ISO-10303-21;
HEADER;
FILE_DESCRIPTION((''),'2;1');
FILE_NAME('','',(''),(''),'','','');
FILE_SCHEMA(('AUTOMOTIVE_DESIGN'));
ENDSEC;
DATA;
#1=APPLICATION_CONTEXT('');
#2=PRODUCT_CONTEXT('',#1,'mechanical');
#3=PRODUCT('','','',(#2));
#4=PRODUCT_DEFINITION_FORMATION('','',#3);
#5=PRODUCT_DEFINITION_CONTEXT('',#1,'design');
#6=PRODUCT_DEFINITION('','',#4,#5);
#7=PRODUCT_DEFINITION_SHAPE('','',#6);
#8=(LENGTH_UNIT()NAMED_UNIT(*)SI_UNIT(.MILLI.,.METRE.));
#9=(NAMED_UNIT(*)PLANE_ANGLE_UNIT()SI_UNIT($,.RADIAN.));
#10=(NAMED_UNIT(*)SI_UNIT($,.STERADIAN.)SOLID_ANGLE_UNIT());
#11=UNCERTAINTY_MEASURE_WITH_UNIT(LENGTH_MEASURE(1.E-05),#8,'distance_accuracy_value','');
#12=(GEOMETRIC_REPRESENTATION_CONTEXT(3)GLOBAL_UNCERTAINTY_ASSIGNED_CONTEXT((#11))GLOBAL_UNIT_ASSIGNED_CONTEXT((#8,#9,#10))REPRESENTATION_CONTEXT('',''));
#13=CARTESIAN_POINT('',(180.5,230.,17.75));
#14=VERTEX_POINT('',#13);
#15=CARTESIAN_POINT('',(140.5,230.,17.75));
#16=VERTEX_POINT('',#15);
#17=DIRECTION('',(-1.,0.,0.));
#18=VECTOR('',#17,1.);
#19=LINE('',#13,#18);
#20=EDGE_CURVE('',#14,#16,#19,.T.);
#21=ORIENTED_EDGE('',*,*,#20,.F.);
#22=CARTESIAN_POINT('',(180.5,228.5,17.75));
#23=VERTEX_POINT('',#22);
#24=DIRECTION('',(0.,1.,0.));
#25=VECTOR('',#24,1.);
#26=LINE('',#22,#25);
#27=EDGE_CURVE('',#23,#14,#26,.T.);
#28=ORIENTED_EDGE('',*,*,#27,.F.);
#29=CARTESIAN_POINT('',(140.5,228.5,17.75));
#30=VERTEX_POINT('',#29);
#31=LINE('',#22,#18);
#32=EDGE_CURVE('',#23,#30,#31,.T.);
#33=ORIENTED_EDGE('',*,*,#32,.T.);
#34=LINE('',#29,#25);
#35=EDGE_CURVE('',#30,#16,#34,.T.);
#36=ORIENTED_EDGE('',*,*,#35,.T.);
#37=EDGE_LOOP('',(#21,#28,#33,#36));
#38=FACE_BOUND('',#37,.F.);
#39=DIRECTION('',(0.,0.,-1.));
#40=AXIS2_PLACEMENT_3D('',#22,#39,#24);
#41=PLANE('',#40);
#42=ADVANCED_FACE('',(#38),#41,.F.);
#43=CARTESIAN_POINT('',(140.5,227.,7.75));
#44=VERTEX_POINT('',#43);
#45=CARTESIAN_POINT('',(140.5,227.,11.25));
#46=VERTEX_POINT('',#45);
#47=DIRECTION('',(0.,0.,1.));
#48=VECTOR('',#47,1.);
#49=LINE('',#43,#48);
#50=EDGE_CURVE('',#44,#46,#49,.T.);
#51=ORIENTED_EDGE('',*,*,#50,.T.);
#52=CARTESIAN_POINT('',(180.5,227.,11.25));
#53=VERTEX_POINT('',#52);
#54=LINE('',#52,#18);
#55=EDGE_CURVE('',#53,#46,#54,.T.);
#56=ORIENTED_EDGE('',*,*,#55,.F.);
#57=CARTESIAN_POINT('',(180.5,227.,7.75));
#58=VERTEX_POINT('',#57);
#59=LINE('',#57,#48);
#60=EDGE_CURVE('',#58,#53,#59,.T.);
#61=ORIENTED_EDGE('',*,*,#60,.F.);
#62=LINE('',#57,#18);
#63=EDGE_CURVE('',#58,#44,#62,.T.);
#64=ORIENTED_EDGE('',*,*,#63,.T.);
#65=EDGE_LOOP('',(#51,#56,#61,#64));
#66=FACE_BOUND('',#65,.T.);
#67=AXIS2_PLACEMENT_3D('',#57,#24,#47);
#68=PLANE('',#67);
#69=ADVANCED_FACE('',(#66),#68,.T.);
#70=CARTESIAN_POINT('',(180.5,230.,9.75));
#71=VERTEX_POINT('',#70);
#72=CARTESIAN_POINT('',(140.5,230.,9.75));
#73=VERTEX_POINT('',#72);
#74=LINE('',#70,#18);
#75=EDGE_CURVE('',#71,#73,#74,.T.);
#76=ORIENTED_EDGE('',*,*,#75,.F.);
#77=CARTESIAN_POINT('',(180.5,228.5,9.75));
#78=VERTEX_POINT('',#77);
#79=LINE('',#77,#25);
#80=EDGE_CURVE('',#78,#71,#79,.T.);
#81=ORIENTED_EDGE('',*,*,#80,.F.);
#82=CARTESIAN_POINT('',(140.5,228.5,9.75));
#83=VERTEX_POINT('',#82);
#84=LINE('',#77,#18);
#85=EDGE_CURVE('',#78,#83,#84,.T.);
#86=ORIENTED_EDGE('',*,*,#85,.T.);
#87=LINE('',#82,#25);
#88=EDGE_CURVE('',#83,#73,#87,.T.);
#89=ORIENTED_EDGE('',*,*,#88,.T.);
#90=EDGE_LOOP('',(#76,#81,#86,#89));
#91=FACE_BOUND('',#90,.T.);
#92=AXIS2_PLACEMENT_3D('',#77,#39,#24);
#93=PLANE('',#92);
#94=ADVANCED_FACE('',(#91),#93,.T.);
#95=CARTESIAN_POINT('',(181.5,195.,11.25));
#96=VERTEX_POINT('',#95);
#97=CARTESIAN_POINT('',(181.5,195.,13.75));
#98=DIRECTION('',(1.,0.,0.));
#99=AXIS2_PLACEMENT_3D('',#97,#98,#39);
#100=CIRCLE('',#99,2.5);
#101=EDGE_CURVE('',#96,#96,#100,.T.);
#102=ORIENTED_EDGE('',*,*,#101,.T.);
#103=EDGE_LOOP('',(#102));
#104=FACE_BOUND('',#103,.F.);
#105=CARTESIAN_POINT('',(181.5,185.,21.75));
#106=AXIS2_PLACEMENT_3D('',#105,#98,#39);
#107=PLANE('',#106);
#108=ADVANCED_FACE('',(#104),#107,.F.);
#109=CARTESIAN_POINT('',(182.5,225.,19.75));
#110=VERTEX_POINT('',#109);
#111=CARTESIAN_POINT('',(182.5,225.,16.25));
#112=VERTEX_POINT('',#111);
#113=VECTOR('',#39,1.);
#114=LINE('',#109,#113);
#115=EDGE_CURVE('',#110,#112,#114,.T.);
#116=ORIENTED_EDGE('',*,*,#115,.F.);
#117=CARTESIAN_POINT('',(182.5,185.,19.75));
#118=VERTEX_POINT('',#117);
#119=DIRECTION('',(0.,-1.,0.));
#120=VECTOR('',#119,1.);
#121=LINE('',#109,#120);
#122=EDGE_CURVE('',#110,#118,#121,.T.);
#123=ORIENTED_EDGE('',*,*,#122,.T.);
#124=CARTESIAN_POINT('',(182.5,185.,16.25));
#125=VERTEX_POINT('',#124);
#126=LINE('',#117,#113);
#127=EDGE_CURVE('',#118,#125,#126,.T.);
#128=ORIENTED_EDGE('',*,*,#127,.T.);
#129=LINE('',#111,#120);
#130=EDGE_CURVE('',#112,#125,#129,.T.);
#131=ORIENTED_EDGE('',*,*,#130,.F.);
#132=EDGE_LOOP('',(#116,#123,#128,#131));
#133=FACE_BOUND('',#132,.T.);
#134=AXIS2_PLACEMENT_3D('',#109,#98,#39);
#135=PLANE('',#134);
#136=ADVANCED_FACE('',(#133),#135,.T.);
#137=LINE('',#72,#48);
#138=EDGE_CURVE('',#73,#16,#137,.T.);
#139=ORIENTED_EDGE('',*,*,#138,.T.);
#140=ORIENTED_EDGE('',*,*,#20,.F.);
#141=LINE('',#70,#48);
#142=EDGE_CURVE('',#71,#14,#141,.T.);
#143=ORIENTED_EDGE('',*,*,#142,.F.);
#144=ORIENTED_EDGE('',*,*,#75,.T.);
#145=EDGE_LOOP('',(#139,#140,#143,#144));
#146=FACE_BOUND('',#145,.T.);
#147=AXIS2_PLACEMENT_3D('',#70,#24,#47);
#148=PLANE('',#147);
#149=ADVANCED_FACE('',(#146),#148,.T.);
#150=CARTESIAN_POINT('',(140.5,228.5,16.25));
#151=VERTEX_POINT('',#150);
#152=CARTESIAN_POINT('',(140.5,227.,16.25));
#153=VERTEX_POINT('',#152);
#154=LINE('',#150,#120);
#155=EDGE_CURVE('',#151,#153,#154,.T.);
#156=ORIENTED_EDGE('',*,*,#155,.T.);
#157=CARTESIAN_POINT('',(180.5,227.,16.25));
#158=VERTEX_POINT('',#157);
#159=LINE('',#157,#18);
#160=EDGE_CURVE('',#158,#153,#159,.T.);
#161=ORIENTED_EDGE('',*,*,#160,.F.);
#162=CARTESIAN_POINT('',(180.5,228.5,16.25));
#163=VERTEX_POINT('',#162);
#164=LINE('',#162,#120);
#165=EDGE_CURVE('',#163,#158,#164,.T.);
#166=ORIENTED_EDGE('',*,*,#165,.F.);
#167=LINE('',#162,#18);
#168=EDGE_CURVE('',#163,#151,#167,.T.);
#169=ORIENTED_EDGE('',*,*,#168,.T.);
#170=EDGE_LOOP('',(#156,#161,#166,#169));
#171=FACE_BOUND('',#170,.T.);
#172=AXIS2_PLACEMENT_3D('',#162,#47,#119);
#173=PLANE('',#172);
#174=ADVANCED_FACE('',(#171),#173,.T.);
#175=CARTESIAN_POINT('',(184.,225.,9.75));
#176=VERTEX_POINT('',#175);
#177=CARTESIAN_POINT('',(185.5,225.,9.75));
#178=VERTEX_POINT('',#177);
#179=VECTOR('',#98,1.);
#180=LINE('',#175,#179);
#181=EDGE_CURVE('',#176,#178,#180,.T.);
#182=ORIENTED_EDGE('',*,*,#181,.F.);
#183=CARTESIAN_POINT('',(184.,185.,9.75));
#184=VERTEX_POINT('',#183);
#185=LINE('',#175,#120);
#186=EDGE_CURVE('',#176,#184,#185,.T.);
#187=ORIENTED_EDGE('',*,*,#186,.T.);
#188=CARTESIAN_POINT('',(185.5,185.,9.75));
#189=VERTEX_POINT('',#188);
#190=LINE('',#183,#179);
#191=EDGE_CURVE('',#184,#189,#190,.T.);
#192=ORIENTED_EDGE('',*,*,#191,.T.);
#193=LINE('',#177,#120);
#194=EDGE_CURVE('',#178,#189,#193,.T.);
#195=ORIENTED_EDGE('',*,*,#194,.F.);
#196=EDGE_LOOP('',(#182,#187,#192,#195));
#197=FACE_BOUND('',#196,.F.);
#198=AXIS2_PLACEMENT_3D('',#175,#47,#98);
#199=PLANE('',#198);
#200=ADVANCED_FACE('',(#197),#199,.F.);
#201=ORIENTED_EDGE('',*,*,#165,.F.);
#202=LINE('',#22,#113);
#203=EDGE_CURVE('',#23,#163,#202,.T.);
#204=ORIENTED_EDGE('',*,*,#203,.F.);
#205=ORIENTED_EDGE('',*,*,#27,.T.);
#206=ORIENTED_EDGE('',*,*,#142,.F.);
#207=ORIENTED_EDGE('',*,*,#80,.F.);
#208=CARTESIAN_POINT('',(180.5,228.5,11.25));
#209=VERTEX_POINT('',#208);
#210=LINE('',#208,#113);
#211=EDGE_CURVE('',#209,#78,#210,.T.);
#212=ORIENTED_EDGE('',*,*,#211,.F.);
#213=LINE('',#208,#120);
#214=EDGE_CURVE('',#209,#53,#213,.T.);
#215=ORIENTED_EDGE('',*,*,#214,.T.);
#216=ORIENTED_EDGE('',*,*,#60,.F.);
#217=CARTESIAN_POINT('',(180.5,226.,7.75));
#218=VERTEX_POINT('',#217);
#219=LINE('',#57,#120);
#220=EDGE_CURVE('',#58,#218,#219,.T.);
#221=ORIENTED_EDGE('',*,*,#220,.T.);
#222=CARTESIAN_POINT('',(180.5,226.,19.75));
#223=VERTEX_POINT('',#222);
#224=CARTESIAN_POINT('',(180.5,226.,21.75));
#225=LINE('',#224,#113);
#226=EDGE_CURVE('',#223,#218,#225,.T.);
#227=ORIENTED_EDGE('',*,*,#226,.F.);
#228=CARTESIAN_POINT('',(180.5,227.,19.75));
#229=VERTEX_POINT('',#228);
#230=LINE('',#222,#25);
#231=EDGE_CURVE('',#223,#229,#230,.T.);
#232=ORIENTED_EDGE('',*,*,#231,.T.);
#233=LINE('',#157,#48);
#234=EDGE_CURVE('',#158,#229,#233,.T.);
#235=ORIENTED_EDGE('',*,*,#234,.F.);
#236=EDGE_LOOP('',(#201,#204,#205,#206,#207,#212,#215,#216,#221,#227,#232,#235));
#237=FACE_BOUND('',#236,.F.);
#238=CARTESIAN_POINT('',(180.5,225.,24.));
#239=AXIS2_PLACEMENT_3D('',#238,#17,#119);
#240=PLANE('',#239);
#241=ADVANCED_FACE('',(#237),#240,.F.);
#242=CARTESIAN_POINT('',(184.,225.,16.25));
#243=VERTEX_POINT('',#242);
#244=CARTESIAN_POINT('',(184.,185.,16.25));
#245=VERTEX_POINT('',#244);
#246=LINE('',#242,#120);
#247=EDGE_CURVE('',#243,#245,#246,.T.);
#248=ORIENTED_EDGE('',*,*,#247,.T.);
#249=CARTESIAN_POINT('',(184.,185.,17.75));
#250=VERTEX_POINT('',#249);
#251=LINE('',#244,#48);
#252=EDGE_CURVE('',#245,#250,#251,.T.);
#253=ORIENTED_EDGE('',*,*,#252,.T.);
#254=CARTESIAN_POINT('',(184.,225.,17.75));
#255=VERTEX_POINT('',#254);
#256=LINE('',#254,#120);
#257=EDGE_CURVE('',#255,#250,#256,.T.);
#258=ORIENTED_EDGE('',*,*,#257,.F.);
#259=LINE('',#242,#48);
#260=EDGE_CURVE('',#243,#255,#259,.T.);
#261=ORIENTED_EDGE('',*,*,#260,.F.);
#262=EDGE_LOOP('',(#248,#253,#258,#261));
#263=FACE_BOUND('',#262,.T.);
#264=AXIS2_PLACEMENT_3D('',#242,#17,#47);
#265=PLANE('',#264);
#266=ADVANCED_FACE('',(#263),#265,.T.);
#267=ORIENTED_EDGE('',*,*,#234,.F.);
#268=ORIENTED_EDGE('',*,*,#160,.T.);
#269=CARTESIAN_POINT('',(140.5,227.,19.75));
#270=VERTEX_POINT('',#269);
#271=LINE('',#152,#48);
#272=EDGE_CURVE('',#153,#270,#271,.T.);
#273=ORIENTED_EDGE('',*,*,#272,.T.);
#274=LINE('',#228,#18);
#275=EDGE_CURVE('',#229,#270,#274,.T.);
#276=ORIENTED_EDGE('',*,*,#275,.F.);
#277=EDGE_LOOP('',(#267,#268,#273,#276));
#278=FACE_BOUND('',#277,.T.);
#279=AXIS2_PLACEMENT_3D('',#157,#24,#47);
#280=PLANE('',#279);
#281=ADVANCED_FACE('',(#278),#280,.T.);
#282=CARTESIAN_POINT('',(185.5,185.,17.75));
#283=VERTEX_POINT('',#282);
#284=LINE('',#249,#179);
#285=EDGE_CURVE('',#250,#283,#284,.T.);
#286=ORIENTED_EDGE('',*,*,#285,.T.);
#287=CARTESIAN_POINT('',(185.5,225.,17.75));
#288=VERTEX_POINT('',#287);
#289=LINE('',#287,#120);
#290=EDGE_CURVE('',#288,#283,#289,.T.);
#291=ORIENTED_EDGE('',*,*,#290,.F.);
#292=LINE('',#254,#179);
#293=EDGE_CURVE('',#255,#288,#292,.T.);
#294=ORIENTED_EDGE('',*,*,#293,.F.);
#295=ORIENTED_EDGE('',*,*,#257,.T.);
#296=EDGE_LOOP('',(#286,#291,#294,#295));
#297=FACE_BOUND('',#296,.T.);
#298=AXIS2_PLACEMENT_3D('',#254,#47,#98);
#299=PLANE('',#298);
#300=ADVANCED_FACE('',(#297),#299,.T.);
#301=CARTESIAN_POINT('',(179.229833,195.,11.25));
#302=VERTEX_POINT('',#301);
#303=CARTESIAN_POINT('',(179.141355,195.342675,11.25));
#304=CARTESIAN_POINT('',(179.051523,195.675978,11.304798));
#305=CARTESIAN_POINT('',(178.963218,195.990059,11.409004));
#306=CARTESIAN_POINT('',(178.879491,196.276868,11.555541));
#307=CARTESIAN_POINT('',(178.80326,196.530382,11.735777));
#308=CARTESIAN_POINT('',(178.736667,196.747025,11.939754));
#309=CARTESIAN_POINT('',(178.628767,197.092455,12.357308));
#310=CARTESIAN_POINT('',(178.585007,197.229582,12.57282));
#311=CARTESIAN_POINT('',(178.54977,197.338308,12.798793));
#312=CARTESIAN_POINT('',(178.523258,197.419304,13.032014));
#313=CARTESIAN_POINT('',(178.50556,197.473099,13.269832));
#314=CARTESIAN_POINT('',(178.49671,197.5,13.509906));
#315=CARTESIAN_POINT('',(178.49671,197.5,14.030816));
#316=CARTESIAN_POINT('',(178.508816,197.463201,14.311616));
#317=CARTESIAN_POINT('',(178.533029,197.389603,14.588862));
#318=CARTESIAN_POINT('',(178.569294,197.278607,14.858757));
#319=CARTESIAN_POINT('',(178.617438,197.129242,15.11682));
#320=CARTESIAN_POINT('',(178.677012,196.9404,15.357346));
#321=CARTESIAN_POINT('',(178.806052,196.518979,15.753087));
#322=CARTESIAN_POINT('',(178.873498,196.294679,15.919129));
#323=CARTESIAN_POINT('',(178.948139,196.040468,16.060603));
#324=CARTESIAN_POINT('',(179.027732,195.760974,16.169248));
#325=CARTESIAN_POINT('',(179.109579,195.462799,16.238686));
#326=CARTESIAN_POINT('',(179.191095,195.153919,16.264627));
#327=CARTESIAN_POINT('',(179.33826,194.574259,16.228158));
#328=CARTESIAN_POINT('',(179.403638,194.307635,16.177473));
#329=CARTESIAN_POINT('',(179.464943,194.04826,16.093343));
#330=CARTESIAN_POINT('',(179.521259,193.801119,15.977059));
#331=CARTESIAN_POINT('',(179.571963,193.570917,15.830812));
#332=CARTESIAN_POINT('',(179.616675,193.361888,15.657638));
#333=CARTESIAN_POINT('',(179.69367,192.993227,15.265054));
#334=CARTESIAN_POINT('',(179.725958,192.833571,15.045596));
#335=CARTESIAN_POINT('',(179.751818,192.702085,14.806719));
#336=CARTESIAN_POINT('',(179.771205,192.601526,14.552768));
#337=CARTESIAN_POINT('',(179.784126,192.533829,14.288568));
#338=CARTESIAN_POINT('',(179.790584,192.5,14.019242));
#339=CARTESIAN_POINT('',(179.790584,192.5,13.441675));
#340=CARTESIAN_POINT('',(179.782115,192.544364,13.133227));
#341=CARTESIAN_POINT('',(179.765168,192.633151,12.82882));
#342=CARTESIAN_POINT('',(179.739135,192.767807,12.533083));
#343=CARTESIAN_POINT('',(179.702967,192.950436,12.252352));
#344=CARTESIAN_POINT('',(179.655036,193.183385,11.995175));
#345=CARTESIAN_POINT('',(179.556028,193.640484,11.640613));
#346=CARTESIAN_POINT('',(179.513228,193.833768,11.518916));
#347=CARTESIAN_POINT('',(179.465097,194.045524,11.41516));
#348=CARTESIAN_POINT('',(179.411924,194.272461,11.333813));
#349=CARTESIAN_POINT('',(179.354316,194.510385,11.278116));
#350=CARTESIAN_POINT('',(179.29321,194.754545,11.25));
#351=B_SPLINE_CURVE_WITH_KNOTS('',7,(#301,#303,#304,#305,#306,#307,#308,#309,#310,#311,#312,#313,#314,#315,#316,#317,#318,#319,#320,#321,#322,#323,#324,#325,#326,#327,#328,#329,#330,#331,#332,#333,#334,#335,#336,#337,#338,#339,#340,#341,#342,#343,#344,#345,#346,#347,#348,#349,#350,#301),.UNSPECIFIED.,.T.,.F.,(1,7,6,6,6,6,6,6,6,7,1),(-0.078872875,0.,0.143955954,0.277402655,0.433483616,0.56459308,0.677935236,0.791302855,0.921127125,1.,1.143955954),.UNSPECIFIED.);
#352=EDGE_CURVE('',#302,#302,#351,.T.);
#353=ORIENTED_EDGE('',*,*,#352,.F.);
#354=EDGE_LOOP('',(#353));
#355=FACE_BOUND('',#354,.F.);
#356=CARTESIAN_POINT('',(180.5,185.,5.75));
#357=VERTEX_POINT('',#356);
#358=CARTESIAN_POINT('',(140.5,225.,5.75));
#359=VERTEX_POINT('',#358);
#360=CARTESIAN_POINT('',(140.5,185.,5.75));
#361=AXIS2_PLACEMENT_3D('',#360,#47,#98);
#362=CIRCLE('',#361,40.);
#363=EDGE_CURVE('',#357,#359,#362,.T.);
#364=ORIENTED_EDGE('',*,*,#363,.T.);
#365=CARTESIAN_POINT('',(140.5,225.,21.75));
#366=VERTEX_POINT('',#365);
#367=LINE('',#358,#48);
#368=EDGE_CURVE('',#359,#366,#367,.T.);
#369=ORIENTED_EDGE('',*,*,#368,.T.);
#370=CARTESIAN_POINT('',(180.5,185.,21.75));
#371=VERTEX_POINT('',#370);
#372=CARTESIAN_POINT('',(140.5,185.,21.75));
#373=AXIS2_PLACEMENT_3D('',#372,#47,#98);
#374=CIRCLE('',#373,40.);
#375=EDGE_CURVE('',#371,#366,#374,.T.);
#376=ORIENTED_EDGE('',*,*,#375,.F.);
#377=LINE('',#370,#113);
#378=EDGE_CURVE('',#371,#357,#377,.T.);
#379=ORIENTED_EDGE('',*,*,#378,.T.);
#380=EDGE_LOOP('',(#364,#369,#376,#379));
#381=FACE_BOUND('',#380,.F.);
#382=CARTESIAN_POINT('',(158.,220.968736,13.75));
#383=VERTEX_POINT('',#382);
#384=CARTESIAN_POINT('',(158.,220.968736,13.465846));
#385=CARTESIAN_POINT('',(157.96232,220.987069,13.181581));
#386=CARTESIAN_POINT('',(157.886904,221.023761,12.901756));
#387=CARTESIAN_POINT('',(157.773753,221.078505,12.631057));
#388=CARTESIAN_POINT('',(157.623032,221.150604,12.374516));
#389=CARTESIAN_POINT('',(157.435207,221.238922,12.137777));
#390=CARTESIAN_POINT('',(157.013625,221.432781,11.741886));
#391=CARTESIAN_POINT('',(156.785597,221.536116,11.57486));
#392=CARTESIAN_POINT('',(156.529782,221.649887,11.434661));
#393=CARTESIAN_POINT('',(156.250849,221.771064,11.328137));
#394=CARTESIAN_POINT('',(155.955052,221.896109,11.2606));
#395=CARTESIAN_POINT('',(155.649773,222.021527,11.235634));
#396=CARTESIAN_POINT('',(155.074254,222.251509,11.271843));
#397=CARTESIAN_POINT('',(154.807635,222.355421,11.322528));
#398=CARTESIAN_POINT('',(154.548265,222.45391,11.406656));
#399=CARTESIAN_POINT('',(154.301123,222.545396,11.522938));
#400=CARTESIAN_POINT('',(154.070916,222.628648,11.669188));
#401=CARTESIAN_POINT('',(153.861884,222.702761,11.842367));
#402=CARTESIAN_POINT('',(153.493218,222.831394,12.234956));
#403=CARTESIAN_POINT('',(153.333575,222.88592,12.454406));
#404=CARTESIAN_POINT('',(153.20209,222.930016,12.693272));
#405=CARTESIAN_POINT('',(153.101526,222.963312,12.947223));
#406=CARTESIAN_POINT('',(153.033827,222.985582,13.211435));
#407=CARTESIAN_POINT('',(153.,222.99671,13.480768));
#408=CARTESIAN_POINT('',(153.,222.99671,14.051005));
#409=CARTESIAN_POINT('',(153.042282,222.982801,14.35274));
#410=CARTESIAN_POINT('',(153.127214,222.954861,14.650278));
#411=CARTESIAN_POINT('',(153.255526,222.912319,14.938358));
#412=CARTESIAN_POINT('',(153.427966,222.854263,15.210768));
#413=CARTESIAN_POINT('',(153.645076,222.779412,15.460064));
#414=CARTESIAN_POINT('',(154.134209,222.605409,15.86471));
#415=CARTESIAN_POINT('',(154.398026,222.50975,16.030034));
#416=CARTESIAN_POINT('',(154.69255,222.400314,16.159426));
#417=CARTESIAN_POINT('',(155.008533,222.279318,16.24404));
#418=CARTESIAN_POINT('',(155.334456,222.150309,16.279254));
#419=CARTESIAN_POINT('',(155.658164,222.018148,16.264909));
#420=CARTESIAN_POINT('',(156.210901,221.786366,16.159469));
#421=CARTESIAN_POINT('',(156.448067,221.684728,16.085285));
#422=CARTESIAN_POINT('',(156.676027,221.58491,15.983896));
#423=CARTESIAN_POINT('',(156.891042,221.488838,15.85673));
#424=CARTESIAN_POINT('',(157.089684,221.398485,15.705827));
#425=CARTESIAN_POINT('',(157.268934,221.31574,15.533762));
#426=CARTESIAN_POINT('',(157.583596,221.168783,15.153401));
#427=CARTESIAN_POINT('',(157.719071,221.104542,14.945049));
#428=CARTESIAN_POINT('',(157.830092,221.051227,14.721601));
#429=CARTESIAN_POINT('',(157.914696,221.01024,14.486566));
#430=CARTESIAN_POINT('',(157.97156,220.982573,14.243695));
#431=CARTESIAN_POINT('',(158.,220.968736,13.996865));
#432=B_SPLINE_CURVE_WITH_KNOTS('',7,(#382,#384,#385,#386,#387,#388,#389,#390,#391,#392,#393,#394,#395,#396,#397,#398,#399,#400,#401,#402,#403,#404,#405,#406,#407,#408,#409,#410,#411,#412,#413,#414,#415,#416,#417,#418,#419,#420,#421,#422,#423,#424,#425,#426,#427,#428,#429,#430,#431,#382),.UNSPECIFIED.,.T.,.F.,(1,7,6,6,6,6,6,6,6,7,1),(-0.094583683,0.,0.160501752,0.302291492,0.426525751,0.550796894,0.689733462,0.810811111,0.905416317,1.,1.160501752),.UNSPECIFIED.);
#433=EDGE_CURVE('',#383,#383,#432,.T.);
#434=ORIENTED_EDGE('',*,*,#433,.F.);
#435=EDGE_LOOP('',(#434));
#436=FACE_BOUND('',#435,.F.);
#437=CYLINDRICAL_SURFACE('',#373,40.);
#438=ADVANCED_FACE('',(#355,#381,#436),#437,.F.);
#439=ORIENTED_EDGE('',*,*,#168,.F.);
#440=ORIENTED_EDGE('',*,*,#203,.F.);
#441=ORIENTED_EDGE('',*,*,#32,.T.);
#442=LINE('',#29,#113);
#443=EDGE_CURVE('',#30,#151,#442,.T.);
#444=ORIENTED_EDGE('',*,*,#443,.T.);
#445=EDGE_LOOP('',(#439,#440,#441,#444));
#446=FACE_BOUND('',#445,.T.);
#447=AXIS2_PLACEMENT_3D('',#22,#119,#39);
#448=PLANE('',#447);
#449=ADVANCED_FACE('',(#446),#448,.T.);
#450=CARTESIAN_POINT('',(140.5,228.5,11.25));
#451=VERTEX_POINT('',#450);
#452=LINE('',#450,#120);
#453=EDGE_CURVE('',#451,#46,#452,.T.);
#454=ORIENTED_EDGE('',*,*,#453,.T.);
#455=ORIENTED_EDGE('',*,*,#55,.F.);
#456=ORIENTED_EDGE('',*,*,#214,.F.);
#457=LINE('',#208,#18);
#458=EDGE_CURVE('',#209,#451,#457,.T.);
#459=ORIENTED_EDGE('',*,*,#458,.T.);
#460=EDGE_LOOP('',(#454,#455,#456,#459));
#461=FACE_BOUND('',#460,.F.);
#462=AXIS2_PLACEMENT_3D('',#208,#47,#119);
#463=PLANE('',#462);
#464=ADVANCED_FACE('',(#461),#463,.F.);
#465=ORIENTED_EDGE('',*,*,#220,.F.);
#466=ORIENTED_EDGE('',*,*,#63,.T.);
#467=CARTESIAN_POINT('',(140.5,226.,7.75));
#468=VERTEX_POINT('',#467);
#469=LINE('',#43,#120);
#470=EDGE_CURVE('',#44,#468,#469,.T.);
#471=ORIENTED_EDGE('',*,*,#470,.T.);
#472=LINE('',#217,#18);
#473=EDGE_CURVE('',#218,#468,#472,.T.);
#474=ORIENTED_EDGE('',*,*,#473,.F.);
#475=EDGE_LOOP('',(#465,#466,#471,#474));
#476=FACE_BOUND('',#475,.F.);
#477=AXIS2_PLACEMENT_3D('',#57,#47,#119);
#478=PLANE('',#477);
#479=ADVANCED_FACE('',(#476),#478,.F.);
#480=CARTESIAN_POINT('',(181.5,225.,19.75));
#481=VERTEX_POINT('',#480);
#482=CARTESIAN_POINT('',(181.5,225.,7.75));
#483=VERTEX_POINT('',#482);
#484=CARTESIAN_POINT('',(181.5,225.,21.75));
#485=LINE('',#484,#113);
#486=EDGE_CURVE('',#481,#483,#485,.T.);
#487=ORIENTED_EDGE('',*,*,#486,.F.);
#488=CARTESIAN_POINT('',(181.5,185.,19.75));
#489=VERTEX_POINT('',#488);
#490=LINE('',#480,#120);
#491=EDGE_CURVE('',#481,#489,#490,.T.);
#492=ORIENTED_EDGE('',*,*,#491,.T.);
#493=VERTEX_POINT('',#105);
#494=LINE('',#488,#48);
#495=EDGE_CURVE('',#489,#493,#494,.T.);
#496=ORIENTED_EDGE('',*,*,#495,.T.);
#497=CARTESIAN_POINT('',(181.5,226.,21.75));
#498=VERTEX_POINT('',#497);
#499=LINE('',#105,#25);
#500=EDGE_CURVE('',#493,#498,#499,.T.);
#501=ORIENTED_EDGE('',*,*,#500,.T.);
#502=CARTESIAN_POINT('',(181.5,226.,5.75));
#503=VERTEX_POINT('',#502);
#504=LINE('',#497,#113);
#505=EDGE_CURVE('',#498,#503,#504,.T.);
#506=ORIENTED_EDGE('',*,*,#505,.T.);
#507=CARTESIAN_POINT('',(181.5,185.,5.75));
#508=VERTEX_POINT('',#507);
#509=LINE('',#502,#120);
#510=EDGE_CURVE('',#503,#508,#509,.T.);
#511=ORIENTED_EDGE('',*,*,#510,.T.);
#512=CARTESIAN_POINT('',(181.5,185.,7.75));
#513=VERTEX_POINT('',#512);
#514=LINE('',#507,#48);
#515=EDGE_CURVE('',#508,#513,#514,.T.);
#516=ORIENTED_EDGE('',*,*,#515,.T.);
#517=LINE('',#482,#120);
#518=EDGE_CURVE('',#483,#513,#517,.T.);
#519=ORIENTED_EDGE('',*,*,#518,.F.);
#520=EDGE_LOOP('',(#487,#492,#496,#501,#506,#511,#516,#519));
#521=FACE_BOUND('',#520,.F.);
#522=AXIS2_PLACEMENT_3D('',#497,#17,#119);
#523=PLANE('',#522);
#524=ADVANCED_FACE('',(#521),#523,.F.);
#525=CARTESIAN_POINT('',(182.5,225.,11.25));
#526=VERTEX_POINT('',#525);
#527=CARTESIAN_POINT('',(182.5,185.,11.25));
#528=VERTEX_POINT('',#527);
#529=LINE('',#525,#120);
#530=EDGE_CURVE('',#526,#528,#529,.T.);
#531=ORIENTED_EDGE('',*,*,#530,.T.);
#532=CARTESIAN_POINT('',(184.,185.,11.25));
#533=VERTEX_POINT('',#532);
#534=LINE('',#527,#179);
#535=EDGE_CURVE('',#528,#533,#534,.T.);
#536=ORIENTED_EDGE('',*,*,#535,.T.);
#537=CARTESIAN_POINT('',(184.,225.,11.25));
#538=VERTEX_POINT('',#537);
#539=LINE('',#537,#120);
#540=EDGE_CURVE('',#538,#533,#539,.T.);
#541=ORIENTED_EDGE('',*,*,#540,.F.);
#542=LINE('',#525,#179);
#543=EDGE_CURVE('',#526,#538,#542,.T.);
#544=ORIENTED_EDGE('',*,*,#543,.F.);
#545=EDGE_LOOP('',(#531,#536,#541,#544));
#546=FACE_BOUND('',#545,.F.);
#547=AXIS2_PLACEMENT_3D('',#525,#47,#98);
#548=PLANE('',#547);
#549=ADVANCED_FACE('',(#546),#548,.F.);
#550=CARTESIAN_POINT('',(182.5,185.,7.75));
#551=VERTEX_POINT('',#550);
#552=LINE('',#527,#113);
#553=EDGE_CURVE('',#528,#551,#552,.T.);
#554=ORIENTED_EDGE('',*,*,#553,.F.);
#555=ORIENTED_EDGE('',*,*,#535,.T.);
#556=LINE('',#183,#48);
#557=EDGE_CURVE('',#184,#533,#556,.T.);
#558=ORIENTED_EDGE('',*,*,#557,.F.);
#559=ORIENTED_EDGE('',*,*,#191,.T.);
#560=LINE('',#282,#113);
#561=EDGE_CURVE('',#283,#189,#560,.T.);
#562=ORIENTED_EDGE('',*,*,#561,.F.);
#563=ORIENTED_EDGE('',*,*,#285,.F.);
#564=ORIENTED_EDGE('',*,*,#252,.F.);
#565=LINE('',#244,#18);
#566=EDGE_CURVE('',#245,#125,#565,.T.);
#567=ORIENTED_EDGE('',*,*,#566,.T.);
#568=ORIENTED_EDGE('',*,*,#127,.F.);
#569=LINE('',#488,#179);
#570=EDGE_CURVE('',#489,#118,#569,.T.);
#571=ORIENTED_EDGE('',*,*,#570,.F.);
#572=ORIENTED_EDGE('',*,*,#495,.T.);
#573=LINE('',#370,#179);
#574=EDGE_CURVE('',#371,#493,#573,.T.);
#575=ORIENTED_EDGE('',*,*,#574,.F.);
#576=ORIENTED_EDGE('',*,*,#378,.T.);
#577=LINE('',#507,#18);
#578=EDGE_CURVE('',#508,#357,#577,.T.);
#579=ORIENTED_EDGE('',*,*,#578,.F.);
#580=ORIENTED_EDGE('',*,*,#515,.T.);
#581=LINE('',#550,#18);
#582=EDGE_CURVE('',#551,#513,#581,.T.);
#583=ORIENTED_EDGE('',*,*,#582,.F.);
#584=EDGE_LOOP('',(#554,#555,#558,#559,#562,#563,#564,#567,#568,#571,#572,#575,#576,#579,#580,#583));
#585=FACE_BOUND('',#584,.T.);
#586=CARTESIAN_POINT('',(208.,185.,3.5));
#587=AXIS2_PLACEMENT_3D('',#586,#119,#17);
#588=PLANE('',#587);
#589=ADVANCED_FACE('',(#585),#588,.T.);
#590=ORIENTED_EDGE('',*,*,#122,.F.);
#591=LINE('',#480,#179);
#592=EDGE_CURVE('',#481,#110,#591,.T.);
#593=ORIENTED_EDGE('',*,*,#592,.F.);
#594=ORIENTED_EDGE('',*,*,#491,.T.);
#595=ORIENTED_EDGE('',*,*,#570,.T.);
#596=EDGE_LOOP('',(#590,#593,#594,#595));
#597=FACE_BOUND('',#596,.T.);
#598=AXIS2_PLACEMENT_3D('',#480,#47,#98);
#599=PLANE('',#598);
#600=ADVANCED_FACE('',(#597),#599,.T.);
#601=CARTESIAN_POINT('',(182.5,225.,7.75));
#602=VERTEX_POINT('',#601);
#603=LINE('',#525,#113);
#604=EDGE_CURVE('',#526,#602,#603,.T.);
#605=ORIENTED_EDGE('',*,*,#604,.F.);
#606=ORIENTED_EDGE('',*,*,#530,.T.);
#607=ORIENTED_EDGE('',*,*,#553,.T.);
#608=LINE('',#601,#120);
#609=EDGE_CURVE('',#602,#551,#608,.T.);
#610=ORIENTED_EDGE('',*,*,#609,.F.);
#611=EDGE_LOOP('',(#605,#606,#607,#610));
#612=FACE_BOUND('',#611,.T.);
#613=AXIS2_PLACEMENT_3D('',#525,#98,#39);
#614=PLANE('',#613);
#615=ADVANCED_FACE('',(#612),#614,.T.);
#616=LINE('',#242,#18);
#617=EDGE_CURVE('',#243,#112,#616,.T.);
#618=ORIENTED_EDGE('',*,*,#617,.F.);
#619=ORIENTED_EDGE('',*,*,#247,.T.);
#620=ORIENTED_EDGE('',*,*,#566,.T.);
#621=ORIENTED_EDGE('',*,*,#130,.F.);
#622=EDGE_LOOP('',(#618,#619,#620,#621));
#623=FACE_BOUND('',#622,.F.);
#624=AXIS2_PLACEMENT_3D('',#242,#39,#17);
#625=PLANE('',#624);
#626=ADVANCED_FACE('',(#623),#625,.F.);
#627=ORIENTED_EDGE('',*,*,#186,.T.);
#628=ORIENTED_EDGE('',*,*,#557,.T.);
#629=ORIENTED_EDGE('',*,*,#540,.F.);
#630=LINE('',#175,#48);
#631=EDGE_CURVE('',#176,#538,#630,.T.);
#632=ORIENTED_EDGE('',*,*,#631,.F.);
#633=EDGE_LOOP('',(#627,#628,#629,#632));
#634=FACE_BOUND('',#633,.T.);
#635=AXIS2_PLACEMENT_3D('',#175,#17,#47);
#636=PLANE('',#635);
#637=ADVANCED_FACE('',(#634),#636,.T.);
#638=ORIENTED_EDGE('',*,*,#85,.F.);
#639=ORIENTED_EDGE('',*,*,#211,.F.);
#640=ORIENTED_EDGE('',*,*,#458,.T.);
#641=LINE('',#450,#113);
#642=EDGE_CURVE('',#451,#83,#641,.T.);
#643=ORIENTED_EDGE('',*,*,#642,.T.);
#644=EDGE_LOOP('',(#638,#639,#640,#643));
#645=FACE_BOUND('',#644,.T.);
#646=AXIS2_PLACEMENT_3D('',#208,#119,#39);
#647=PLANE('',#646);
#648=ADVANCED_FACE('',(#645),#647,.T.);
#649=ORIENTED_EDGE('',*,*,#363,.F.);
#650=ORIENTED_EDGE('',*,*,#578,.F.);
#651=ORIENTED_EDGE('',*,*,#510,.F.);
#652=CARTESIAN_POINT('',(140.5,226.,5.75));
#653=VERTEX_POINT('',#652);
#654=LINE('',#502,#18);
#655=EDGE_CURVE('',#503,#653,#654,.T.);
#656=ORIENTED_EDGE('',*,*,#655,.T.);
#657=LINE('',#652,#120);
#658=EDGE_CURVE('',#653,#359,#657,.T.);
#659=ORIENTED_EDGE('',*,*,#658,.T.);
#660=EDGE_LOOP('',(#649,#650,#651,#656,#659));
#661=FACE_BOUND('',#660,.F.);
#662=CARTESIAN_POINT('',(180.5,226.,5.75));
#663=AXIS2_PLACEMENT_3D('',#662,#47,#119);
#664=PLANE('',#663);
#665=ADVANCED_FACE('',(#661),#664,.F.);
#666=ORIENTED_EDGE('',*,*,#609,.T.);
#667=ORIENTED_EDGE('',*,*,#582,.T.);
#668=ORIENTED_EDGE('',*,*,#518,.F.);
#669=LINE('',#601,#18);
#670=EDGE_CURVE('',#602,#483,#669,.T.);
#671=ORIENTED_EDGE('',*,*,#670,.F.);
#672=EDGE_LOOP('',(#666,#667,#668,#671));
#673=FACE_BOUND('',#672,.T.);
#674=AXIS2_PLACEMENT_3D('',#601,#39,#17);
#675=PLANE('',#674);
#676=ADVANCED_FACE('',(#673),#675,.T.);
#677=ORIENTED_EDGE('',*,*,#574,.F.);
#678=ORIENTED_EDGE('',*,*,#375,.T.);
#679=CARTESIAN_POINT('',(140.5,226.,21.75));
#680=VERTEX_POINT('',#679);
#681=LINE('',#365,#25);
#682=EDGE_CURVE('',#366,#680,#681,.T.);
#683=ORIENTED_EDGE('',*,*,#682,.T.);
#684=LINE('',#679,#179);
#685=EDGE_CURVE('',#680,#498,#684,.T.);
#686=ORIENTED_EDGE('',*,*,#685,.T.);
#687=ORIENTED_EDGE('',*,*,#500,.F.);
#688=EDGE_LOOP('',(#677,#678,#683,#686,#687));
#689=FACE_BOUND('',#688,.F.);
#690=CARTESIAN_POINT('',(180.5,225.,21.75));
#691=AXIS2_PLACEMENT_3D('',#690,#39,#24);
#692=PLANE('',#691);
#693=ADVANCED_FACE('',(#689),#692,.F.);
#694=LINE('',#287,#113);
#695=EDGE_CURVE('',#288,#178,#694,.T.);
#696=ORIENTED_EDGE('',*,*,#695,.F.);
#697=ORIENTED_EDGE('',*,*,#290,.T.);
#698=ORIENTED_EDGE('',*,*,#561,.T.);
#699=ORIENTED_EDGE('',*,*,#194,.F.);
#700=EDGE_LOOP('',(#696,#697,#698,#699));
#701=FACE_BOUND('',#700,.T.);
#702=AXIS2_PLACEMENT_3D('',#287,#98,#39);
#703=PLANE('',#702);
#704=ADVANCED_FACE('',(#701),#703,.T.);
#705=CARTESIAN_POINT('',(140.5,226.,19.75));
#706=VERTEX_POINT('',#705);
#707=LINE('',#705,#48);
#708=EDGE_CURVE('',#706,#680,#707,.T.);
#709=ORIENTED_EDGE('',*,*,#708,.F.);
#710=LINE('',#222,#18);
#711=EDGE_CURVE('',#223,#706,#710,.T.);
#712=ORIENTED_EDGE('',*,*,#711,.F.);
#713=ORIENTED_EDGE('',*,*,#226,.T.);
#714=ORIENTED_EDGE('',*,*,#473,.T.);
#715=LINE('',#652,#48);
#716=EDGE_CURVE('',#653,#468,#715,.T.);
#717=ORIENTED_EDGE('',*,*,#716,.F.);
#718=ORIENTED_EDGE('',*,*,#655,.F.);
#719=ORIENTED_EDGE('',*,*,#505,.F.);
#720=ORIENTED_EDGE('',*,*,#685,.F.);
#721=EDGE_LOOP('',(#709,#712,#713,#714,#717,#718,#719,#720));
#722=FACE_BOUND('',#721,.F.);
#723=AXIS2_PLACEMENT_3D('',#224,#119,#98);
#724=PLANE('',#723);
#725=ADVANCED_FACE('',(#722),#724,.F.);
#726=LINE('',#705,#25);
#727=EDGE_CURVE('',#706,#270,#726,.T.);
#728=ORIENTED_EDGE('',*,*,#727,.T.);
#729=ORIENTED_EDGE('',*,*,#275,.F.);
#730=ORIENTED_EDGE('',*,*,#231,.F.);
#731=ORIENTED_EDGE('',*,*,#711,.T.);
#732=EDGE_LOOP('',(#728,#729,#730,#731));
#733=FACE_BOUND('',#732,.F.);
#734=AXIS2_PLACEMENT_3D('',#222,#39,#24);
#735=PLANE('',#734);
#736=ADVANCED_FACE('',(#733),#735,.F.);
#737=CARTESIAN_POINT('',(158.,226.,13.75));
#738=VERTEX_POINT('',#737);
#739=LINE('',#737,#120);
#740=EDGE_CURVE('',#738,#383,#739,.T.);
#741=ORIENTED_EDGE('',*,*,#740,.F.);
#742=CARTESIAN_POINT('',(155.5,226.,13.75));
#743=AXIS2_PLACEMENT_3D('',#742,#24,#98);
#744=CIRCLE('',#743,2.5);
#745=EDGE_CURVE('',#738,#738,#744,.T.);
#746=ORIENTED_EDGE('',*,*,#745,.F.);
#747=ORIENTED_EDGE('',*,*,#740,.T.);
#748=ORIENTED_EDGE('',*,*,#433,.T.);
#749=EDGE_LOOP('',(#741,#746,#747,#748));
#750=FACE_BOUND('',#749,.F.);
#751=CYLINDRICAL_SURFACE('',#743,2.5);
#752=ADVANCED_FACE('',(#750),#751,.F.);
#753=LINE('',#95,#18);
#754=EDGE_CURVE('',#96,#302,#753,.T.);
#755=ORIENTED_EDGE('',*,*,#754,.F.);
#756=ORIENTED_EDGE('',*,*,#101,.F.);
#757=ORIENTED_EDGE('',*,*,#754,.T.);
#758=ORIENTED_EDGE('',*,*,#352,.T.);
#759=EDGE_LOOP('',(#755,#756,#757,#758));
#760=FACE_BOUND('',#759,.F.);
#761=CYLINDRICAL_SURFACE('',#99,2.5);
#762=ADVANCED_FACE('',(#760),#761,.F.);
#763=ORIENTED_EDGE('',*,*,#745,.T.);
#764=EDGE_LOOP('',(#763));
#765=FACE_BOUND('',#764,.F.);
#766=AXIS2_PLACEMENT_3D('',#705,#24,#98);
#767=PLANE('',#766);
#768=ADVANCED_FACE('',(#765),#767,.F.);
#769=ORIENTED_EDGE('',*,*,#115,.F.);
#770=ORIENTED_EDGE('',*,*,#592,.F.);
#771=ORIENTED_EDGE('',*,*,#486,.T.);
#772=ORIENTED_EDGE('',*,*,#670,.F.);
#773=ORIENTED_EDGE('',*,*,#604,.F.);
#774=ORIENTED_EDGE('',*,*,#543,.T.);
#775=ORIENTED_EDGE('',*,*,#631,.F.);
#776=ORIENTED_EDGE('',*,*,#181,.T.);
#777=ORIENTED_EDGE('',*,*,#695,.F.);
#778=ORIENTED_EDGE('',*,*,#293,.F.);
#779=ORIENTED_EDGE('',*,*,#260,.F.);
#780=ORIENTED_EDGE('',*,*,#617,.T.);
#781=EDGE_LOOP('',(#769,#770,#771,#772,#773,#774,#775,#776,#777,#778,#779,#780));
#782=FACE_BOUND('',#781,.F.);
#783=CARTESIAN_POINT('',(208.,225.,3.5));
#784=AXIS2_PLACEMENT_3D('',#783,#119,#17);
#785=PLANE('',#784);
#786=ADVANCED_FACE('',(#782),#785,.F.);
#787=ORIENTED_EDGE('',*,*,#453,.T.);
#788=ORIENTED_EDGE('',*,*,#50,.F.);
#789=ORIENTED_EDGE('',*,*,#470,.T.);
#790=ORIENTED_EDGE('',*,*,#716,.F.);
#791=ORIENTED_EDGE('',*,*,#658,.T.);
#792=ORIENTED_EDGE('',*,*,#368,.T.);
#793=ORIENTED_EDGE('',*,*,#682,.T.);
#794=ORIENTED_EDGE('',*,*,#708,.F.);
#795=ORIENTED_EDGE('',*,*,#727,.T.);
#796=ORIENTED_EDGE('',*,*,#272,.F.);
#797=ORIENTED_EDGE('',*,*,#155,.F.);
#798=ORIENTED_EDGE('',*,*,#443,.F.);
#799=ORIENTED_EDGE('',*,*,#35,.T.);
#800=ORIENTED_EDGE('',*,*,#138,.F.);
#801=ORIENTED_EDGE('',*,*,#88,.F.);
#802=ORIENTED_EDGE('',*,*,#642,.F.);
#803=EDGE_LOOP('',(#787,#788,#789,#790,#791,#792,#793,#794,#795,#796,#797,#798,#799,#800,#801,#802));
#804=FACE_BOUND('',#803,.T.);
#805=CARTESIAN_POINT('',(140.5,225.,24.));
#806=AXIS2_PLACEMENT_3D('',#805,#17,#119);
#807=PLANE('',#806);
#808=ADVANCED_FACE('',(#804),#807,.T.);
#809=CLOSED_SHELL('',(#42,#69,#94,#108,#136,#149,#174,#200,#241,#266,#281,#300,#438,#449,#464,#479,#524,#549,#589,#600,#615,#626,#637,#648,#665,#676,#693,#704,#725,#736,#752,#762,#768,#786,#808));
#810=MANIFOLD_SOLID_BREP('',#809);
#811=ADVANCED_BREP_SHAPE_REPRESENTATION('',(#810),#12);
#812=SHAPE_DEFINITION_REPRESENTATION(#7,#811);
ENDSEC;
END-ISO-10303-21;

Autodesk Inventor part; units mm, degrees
ref_plane "Work Plane1" through (208, 234.75, 13.75) normal (0, 0, 1) x (1, 0, 0)
ref_plane "Work Plane2" through (180.5, 225, 24) normal (-1, 0, 0) x (0, -1, 0)
sketch "Sketch4" plane through (180.5, 225, 24) normal (-1, 0, 0) x (0, -1, 0)
  line L0 (-20.75, -21) -> (-18.75, -21) construction
  line L1 (-18.75, -21) -> (-18.75, -15.25) construction
  line L2 (-18.75, -15.25) -> (-24.5, -15.25) construction
  line L3 (-24.5, -15.25) -> (-24.5, -17.25) construction
  line L4 (-24.5, -17.25) -> (-25.5, -17.25) construction
  line L5 (-25.5, -17.25) -> (-25.5, -19.25) construction
  line L6 (-25.5, -19.25) -> (-26.5, -19.25) construction
  line L7 (-26.5, -19.25) -> (-26.5, -20.5) construction
  arc A0 (-26.5, -20.5) -> (-24, -23) centre (-24, -20.5) ccw construction
  line L8 (-24, -23) -> (-22.75, -23) construction
  line L9 (-22.75, -23) -> (-22.75, -22) construction
  line L10 (-22.75, -22) -> (-20.75, -22) construction
  line L11 (-20.75, -22) -> (-20.75, -21) construction
  line L12 (-24.5, -3.25) -> (-24.5, -5.25) construction
  line L13 (-24.5, -5.25) -> (-18.75, -5.25) construction
  line L14 (-18.75, -5.25) -> (-18.75, 0.5) construction
  line L15 (-18.75, 0.5) -> (-20.75, 0.5) construction
  line L16 (-20.75, 0.5) -> (-20.75, 1.5) construction
  line L17 (-20.75, 1.5) -> (-22.75, 1.5) construction
  line L18 (-22.75, 1.5) -> (-22.75, 2.5) construction
  line L19 (-22.75, 2.5) -> (-24, 2.5) construction
  arc A1 (-24, 2.5) -> (-26.5, 0) centre (-24, 0) ccw construction
  line L20 (-26.5, 0) -> (-26.5, -1.25) construction
  line L21 (-26.5, -1.25) -> (-25.5, -1.25) construction
  line L22 (-25.5, -1.25) -> (-25.5, -3.25) construction
  line L23 (-25.5, -3.25) -> (-24.5, -3.25) construction
  line L24 (-6.75, 0.5) -> (-8.75, 0.5) construction
  line L25 (-8.75, 0.5) -> (-8.75, -5.25) construction
  line L26 (-8.75, -5.25) -> (-3, -5.25) construction
  line L27 (-3, -5.25) -> (-3, -3.25) construction
  line L28 (-3, -3.25) -> (-2, -3.25) construction
  line L29 (-2, -3.25) -> (-2, -1.25) construction
  line L30 (-2, -1.25) -> (-1, -1.25) construction
  line L31 (-1, -1.25) -> (-1, 0) construction
  arc A2 (-1, 0) -> (-3.5, 2.5) centre (-3.5, 0) ccw construction
  line L32 (-3.5, 2.5) -> (-4.75, 2.5) construction
  line L33 (-4.75, 2.5) -> (-4.75, 1.5) construction
  line L34 (-4.75, 1.5) -> (-6.75, 1.5) construction
  line L35 (-6.75, 1.5) -> (-6.75, 0.5) construction
  line L36 (-3, -17.25) -> (-3, -15.25) construction
  line L37 (-3, -15.25) -> (-8.75, -15.25) construction
  line L38 (-8.75, -15.25) -> (-8.75, -21) construction
  line L39 (-8.75, -21) -> (-6.75, -21) construction
  line L40 (-6.75, -21) -> (-6.75, -22) construction
  line L41 (-6.75, -22) -> (-4.75, -22) construction
  line L42 (-4.75, -22) -> (-4.75, -23) construction
  line L43 (-4.75, -23) -> (-3.5, -23) construction
  arc A3 (-3.5, -23) -> (-1, -20.5) centre (-3.5, -20.5) ccw construction
  line L44 (-1, -20.5) -> (-1, -19.25) construction
  line L45 (-1, -19.25) -> (-2, -19.25) construction
  line L46 (-2, -19.25) -> (-2, -17.25) construction
  line L47 (-2, -17.25) -> (-3, -17.25) construction
  line L48 (-11.2751, -13.432) -> (-10.568, -12.7249) construction
  line L49 (-10.568, -12.7249) -> (-11.6644, -11.6285) construction
  arc A4 (-11.6644, -11.6285) -> (-11.6644, -8.8715) centre (-13.75, -10.25) ccw construction
  line L50 (-11.6644, -8.8715) -> (-10.568, -7.7751) construction
  line L51 (-10.568, -7.7751) -> (-11.2751, -7.068) construction
  line L52 (-11.2751, -7.068) -> (-12.3715, -8.1644) construction
  arc A5 (-12.3715, -8.1644) -> (-15.1285, -8.1644) centre (-13.75, -10.25) ccw construction
  line L53 (-15.1285, -8.1644) -> (-16.2249, -7.068) construction
  line L54 (-16.2249, -7.068) -> (-16.932, -7.7751) construction
  line L55 (-16.932, -7.7751) -> (-15.8356, -8.8715) construction
  arc A6 (-15.8356, -8.8715) -> (-15.8356, -11.6285) centre (-13.75, -10.25) ccw construction
  line L56 (-15.8356, -11.6285) -> (-16.932, -12.7249) construction
  line L57 (-16.932, -12.7249) -> (-16.2249, -13.432) construction
  line L58 (-16.2249, -13.432) -> (-15.1285, -12.3356) construction
  arc A7 (-15.1285, -12.3356) -> (-12.3715, -12.3356) centre (-13.75, -10.25) ccw construction
  line L59 (-12.3715, -12.3356) -> (-11.2751, -13.432) construction
  line L60 (-3.5, -14.25) -> (-3.5, -12.75) construction
  line L61 (-3.5, -12.75) -> (-2, -12.75) construction
  line L62 (-2, -12.75) -> (-2, -16.25) construction
  line L63 (-2, -16.25) -> (-1, -16.25) construction
  line L64 (-1, -16.25) -> (-1, -18.25) construction
  line L65 (-1, -18.25) -> (0, -18.25) construction
  line L66 (0, -18.25) -> (0, -20.5) construction
  arc A8 (-3.5, -24) -> (0, -20.5) centre (-3.5, -20.5) ccw construction
  line L67 (-3.5, -24) -> (-5.75, -24) construction
  line L68 (-5.75, -24) -> (-5.75, -23) construction
  line L69 (-5.75, -23) -> (-7.75, -23) construction
  line L70 (-7.75, -23) -> (-7.75, -22) construction
  line L71 (-7.75, -22) -> (-11.25, -22) construction
  line L72 (-11.25, -22) -> (-11.25, -20.5) construction
  line L73 (-11.25, -20.5) -> (-9.75, -20.5) construction
  line L74 (-9.75, -20.5) -> (-9.75, -15.25) construction
  line L75 (-9.75, -15.25) -> (-17.75, -15.25) construction
  line L76 (-17.75, -15.25) -> (-17.75, -20.5) construction
  line L77 (-17.75, -20.5) -> (-16.25, -20.5) construction
  line L78 (-16.25, -20.5) -> (-16.25, -22) construction
  line L79 (-16.25, -22) -> (-19.75, -22) construction
  line L80 (-19.75, -22) -> (-19.75, -23) construction
  line L81 (-19.75, -23) -> (-21.75, -23) construction
  line L82 (-21.75, -23) -> (-21.75, -24) construction
  line L83 (-21.75, -24) -> (-24, -24) construction
  arc A9 (-27.5, -20.5) -> (-24, -24) centre (-24, -20.5) ccw construction
  line L84 (-27.5, -20.5) -> (-27.5, -18.25) construction
  line L85 (-27.5, -18.25) -> (-26.5, -18.25) construction
  line L86 (-26.5, -18.25) -> (-26.5, -16.25) construction
  line L87 (-26.5, -16.25) -> (-25.5, -16.25) construction
  line L88 (-25.5, -16.25) -> (-25.5, -12.75) construction
  line L89 (-25.5, -12.75) -> (-24, -12.75) construction
  line L90 (-24, -12.75) -> (-24, -14.25) construction
  line L91 (-24, -14.25) -> (-18.75, -14.25) construction
  line L92 (-18.75, -14.25) -> (-18.75, -6.25) construction
  line L93 (-18.75, -6.25) -> (-24, -6.25) construction
  line L94 (-24, -6.25) -> (-24, -7.75) construction
  line L95 (-24, -7.75) -> (-25.5, -7.75) construction
  line L96 (-25.5, -7.75) -> (-25.5, -4.25) construction
  line L97 (-25.5, -4.25) -> (-26.5, -4.25) construction
  line L98 (-26.5, -4.25) -> (-26.5, -2.25) construction
  line L99 (-26.5, -2.25) -> (-27.5, -2.25) construction
  line L100 (-27.5, -2.25) -> (-27.5, 0) construction
  arc A10 (-24, 3.5) -> (-27.5, 0) centre (-24, 0) ccw construction
  line L101 (-24, 3.5) -> (-21.75, 3.5) construction
  line L102 (-21.75, 3.5) -> (-21.75, 2.5) construction
  line L103 (-21.75, 2.5) -> (-19.75, 2.5) construction
  line L104 (-19.75, 2.5) -> (-19.75, 1.5) construction
  line L105 (-19.75, 1.5) -> (-16.25, 1.5) construction
  line L106 (-16.25, 1.5) -> (-16.25, 0) construction
  line L107 (-16.25, 0) -> (-17.75, 0) construction
  line L108 (-17.75, 0) -> (-17.75, -5.25) construction
  line L109 (-17.75, -5.25) -> (-9.75, -5.25) construction
  line L110 (-9.75, -5.25) -> (-9.75, 0) construction
  line L111 (-9.75, 0) -> (-11.25, 0) construction
  line L112 (-11.25, 0) -> (-11.25, 1.5) construction
  line L113 (-11.25, 1.5) -> (-7.75, 1.5) construction
  line L114 (-7.75, 1.5) -> (-7.75, 2.5) construction
  line L115 (-7.75, 2.5) -> (-5.75, 2.5) construction
  line L116 (-5.75, 2.5) -> (-5.75, 3.5) construction
  line L117 (-5.75, 3.5) -> (-3.5, 3.5) construction
  arc A11 (0, 0) -> (-3.5, 3.5) centre (-3.5, 0) ccw construction
  line L118 (0, 0) -> (0, -2.25) construction
  line L119 (0, -2.25) -> (-1, -2.25) construction
  line L120 (-1, -2.25) -> (-1, -4.25) construction
  line L121 (-1, -4.25) -> (-2, -4.25) construction
  line L122 (-2, -4.25) -> (-2, -7.75) construction
  line L123 (-2, -7.75) -> (-3.5, -7.75) construction
  line L124 (-3.5, -7.75) -> (-3.5, -6.25) construction
  line L125 (-3.5, -6.25) -> (-8.75, -6.25) construction
  line L126 (-8.75, -6.25) -> (-8.75, -14.25) construction
  line L127 (-8.75, -14.25) -> (-3.5, -14.25) construction
  line L128 (-3.5, -12.75) -> (-3.5, -14.25)
  line L129 (-3.5, -14.25) -> (-5, -14.25)
  line L130 (-5, -14.25) -> (-5, -6.25)
  line L131 (-3.5, -6.25) -> (-5, -6.25)
  line L132 (-3.5, -6.25) -> (-3.5, -7.75)
  line L133 (-3.5, -7.75) -> (-2, -7.75)
  line L134 (-3.5, -12.75) -> (-2, -12.75)
  line L135 (-2, -16.25) -> (-2, -12.75)
  line L136 (-2, -16.25) -> (-1, -16.25)
  line L137 (-1, -18.25) -> (-1, -16.25)
  line L138 (-1, -18.25) -> (0, -18.25)
  line L139 (-2, -7.75) -> (-2, -4.25)
  line L140 (-1, -4.25) -> (-2, -4.25)
  line L141 (-1, -4.25) -> (-1, -2.25)
  line L142 (0, -2.25) -> (-1, -2.25)
  line L143 (0, -18.25) -> (0, -2.25)
  point P0 (225, -24)
  dimension "d17" = 1.5
extrude "Extrusion4" add sketch "Sketch4" along normal blind 40
ref_plane "Work Plane3" through (208, 225, 3.5) normal (0, -1, 0) x (-1, 0, 0)
sketch "Sketch5" plane through (208, 225, 3.5) normal (0, -1, 0) x (-1, 0, 0)
  line L0 (6.75, -21) -> (8.75, -21) construction
  line L1 (8.75, -21) -> (8.75, -15.25) construction
  line L2 (8.75, -15.25) -> (3, -15.25) construction
  line L3 (3, -15.25) -> (3, -17.25) construction
  line L4 (3, -17.25) -> (2, -17.25) construction
  line L5 (2, -17.25) -> (2, -19.25) construction
  line L6 (2, -19.25) -> (1, -19.25) construction
  line L7 (1, -19.25) -> (1, -20.5) construction
  arc A0 (1, -20.5) -> (3.5, -23) centre (3.5, -20.5) ccw construction
  line L8 (3.5, -23) -> (4.75, -23) construction
  line L9 (4.75, -23) -> (4.75, -22) construction
  line L10 (4.75, -22) -> (6.75, -22) construction
  line L11 (6.75, -22) -> (6.75, -21) construction
  line L12 (3, -3.25) -> (3, -5.25) construction
  line L13 (3, -5.25) -> (8.75, -5.25) construction
  line L14 (8.75, -5.25) -> (8.75, 0.5) construction
  line L15 (8.75, 0.5) -> (6.75, 0.5) construction
  line L16 (6.75, 0.5) -> (6.75, 1.5) construction
  line L17 (6.75, 1.5) -> (4.75, 1.5) construction
  line L18 (4.75, 1.5) -> (4.75, 2.5) construction
  line L19 (4.75, 2.5) -> (3.5, 2.5) construction
  arc A1 (3.5, 2.5) -> (1, 0) centre (3.5, 0) ccw construction
  line L20 (1, 0) -> (1, -1.25) construction
  line L21 (1, -1.25) -> (2, -1.25) construction
  line L22 (2, -1.25) -> (2, -3.25) construction
  line L23 (2, -3.25) -> (3, -3.25) construction
  line L24 (20.75, 0.5) -> (18.75, 0.5) construction
  line L25 (18.75, 0.5) -> (18.75, -5.25) construction
  line L26 (18.75, -5.25) -> (24.5, -5.25) construction
  line L27 (24.5, -5.25) -> (24.5, -3.25) construction
  line L28 (24.5, -3.25) -> (25.5, -3.25) construction
  line L29 (25.5, -3.25) -> (25.5, -1.25) construction
  line L30 (25.5, -1.25) -> (26.5, -1.25) construction
  line L31 (26.5, -1.25) -> (26.5, 0) construction
  arc A2 (26.5, 0) -> (24, 2.5) centre (24, 0) ccw construction
  line L32 (24, 2.5) -> (22.75, 2.5) construction
  line L33 (22.75, 2.5) -> (22.75, 1.5) construction
  line L34 (22.75, 1.5) -> (20.75, 1.5) construction
  line L35 (20.75, 1.5) -> (20.75, 0.5) construction
  line L36 (24.5, -17.25) -> (24.5, -15.25) construction
  line L37 (24.5, -15.25) -> (18.75, -15.25) construction
  line L38 (18.75, -15.25) -> (18.75, -21) construction
  line L39 (18.75, -21) -> (20.75, -21) construction
  line L40 (20.75, -21) -> (20.75, -22) construction
  line L41 (20.75, -22) -> (22.75, -22) construction
  line L42 (22.75, -22) -> (22.75, -23) construction
  line L43 (22.75, -23) -> (24, -23) construction
  arc A3 (24, -23) -> (26.5, -20.5) centre (24, -20.5) ccw construction
  line L44 (26.5, -20.5) -> (26.5, -19.25) construction
  line L45 (26.5, -19.25) -> (25.5, -19.25) construction
  line L46 (25.5, -19.25) -> (25.5, -17.25) construction
  line L47 (25.5, -17.25) -> (24.5, -17.25) construction
  line L48 (16.2249, -13.432) -> (16.932, -12.7249) construction
  line L49 (16.932, -12.7249) -> (15.8356, -11.6285) construction
  arc A4 (15.8356, -11.6285) -> (15.8356, -8.8715) centre (13.75, -10.25) ccw construction
  line L50 (15.8356, -8.8715) -> (16.932, -7.7751) construction
  line L51 (16.932, -7.7751) -> (16.2249, -7.068) construction
  line L52 (16.2249, -7.068) -> (15.1285, -8.1644) construction
  arc A5 (15.1285, -8.1644) -> (12.3715, -8.1644) centre (13.75, -10.25) ccw construction
  line L53 (12.3715, -8.1644) -> (11.2751, -7.068) construction
  line L54 (11.2751, -7.068) -> (10.568, -7.7751) construction
  line L55 (10.568, -7.7751) -> (11.6644, -8.8715) construction
  arc A6 (11.6644, -8.8715) -> (11.6644, -11.6285) centre (13.75, -10.25) ccw construction
  line L56 (11.6644, -11.6285) -> (10.568, -12.7249) construction
  line L57 (10.568, -12.7249) -> (11.2751, -13.432) construction
  line L58 (11.2751, -13.432) -> (12.3715, -12.3356) construction
  arc A7 (12.3715, -12.3356) -> (15.1285, -12.3356) centre (13.75, -10.25) ccw construction
  line L59 (15.1285, -12.3356) -> (16.2249, -13.432) construction
  line L60 (24, -14.25) -> (24, -12.75) construction
  line L61 (24, -12.75) -> (25.5, -12.75) construction
  line L62 (25.5, -12.75) -> (25.5, -16.25) construction
  line L63 (25.5, -16.25) -> (26.5, -16.25) construction
  line L64 (26.5, -16.25) -> (26.5, -18.25) construction
  line L65 (26.5, -18.25) -> (27.5, -18.25) construction
  line L66 (27.5, -18.25) -> (27.5, -20.5) construction
  arc A8 (24, -24) -> (27.5, -20.5) centre (24, -20.5) ccw construction
  line L67 (24, -24) -> (21.75, -24) construction
  line L68 (21.75, -24) -> (21.75, -23) construction
  line L69 (21.75, -23) -> (19.75, -23) construction
  line L70 (19.75, -23) -> (19.75, -22) construction
  line L71 (19.75, -22) -> (16.25, -22) construction
  line L72 (16.25, -22) -> (16.25, -20.5) construction
  line L73 (16.25, -20.5) -> (17.75, -20.5) construction
  line L74 (17.75, -20.5) -> (17.75, -15.25) construction
  line L75 (17.75, -15.25) -> (9.75, -15.25) construction
  line L76 (9.75, -15.25) -> (9.75, -20.5) construction
  line L77 (9.75, -20.5) -> (11.25, -20.5) construction
  line L78 (11.25, -20.5) -> (11.25, -22) construction
  line L79 (11.25, -22) -> (7.75, -22) construction
  line L80 (7.75, -22) -> (7.75, -23) construction
  line L81 (7.75, -23) -> (5.75, -23) construction
  line L82 (5.75, -23) -> (5.75, -24) construction
  line L83 (5.75, -24) -> (3.5, -24) construction
  arc A9 (0, -20.5) -> (3.5, -24) centre (3.5, -20.5) ccw construction
  line L84 (0, -20.5) -> (0, -18.25) construction
  line L85 (0, -18.25) -> (1, -18.25) construction
  line L86 (1, -18.25) -> (1, -16.25) construction
  line L87 (1, -16.25) -> (2, -16.25) construction
  line L88 (2, -16.25) -> (2, -12.75) construction
  line L89 (2, -12.75) -> (3.5, -12.75) construction
  line L90 (3.5, -12.75) -> (3.5, -14.25) construction
  line L91 (3.5, -14.25) -> (8.75, -14.25) construction
  line L92 (8.75, -14.25) -> (8.75, -6.25) construction
  line L93 (8.75, -6.25) -> (3.5, -6.25) construction
  line L94 (3.5, -6.25) -> (3.5, -7.75) construction
  line L95 (3.5, -7.75) -> (2, -7.75) construction
  line L96 (2, -7.75) -> (2, -4.25) construction
  line L97 (2, -4.25) -> (1, -4.25) construction
  line L98 (1, -4.25) -> (1, -2.25) construction
  line L99 (1, -2.25) -> (0, -2.25) construction
  line L100 (0, -2.25) -> (0, 0) construction
  arc A10 (3.5, 3.5) -> (0, 0) centre (3.5, 0) ccw construction
  line L101 (3.5, 3.5) -> (5.75, 3.5) construction
  line L102 (5.75, 3.5) -> (5.75, 2.5) construction
  line L103 (5.75, 2.5) -> (7.75, 2.5) construction
  line L104 (7.75, 2.5) -> (7.75, 1.5) construction
  line L105 (7.75, 1.5) -> (11.25, 1.5) construction
  line L106 (11.25, 1.5) -> (11.25, 0) construction
  line L107 (11.25, 0) -> (9.75, 0) construction
  line L108 (9.75, 0) -> (9.75, -5.25) construction
  line L109 (9.75, -5.25) -> (17.75, -5.25) construction
  line L110 (17.75, -5.25) -> (17.75, 0) construction
  line L111 (17.75, 0) -> (16.25, 0) construction
  line L112 (16.25, 0) -> (16.25, 1.5) construction
  line L113 (16.25, 1.5) -> (19.75, 1.5) construction
  line L114 (19.75, 1.5) -> (19.75, 2.5) construction
  line L115 (19.75, 2.5) -> (21.75, 2.5) construction
  line L116 (21.75, 2.5) -> (21.75, 3.5) construction
  line L117 (21.75, 3.5) -> (24, 3.5) construction
  arc A11 (27.5, 0) -> (24, 3.5) centre (24, 0) ccw construction
  line L118 (27.5, 0) -> (27.5, -2.25) construction
  line L119 (27.5, -2.25) -> (26.5, -2.25) construction
  line L120 (26.5, -2.25) -> (26.5, -4.25) construction
  line L121 (26.5, -4.25) -> (25.5, -4.25) construction
  line L122 (25.5, -4.25) -> (25.5, -7.75) construction
  line L123 (25.5, -7.75) -> (24, -7.75) construction
  line L124 (24, -7.75) -> (24, -6.25) construction
  line L125 (24, -6.25) -> (18.75, -6.25) construction
  line L126 (18.75, -6.25) -> (18.75, -14.25) construction
  line L127 (18.75, -14.25) -> (24, -14.25) construction
  line L128 (27.5, -18.25) -> (26.5, -18.25)
  line L129 (26.5, -16.25) -> (26.5, -18.25)
  line L130 (26.5, -16.25) -> (25.5, -16.25)
  line L131 (25.5, -16.25) -> (25.5, -12.75)
  line L132 (24, -12.75) -> (25.5, -12.75)
  line L133 (24, -12.75) -> (24, -14.25)
  line L134 (24, -14.25) -> (22.5, -14.25)
  line L135 (22.5, -14.25) -> (22.5, -6.25)
  line L136 (24, -6.25) -> (22.5, -6.25)
  line L137 (24, -6.25) -> (24, -7.75)
  line L138 (25.5, -7.75) -> (24, -7.75)
  line L139 (25.5, -7.75) -> (25.5, -4.25)
  line L140 (25.5, -4.25) -> (26.5, -4.25)
  line L141 (26.5, -2.25) -> (26.5, -4.25)
  line L142 (26.5, -2.25) -> (27.5, -2.25)
  line L143 (27.5, -18.25) -> (27.5, -2.25)
  point P0 (208, 3.5)
  dimension "d20" = 1.5
extrude "Extrusion5" add sketch "Sketch5" along normal blind 40
sketch "Sketch6" plane through (140.5, 226, 21.75) normal (0, 0, 1) x (1, 0, 0)
  line L0 (40, 0) -> (0, 0) construction
  line L1 (40, -1) -> (0, -1) construction
  line L2 (40, -1) -> (40, -41) construction
  arc A0 (40, -41) -> (0, -1) centre (0, -41) ccw
  line L3 (0, -1) -> (40, -1)
  line L4 (40, -41) -> (40, -1)
  line L5 (40, 0) -> (41, 0)
  line L6 (41, 0) -> (41, -1)
  line L7 (41, -1) -> (40, -1)
  line L8 (40, -1) -> (40, 0)
  point P0 (-140.5, -226)
  dimension "d23" = 40
  dimension "d26" = 1
extrude "Extrusion6" add sketch "Sketch6" against normal up to surface (16 mm away)
sketch "Sketch7" plane through (140.5, 226, 19.75) normal (0, 1, 0) x (1, 0, 0)
  line L0 (0, 12) -> (0, 14) projected
  circle A0 centre (15, 6) radius 2.5
  point P0 (-140.5, 19.75)
  dimension "d27" = 5
  dimension "d28" = 15
extrude "Extrusion7" cut sketch "Sketch7" against normal through all
sketch "Sketch8" plane through (181.5, 185, 21.75) normal (1, 0, 0) x (0, 0, -1)
  line L0 (16, 0) -> (14, 0) projected
  circle A0 centre (8, 10) radius 2.5
  point P0 (21.75, -185)
  dimension "d31" = 5
  dimension "d32" = 10
extrude "Extrusion8" cut sketch "Sketch8" against normal through all
equation "\"d7\" = d5"
equation "\"d5\" = 4"
properties part number "angolo-profilati"
